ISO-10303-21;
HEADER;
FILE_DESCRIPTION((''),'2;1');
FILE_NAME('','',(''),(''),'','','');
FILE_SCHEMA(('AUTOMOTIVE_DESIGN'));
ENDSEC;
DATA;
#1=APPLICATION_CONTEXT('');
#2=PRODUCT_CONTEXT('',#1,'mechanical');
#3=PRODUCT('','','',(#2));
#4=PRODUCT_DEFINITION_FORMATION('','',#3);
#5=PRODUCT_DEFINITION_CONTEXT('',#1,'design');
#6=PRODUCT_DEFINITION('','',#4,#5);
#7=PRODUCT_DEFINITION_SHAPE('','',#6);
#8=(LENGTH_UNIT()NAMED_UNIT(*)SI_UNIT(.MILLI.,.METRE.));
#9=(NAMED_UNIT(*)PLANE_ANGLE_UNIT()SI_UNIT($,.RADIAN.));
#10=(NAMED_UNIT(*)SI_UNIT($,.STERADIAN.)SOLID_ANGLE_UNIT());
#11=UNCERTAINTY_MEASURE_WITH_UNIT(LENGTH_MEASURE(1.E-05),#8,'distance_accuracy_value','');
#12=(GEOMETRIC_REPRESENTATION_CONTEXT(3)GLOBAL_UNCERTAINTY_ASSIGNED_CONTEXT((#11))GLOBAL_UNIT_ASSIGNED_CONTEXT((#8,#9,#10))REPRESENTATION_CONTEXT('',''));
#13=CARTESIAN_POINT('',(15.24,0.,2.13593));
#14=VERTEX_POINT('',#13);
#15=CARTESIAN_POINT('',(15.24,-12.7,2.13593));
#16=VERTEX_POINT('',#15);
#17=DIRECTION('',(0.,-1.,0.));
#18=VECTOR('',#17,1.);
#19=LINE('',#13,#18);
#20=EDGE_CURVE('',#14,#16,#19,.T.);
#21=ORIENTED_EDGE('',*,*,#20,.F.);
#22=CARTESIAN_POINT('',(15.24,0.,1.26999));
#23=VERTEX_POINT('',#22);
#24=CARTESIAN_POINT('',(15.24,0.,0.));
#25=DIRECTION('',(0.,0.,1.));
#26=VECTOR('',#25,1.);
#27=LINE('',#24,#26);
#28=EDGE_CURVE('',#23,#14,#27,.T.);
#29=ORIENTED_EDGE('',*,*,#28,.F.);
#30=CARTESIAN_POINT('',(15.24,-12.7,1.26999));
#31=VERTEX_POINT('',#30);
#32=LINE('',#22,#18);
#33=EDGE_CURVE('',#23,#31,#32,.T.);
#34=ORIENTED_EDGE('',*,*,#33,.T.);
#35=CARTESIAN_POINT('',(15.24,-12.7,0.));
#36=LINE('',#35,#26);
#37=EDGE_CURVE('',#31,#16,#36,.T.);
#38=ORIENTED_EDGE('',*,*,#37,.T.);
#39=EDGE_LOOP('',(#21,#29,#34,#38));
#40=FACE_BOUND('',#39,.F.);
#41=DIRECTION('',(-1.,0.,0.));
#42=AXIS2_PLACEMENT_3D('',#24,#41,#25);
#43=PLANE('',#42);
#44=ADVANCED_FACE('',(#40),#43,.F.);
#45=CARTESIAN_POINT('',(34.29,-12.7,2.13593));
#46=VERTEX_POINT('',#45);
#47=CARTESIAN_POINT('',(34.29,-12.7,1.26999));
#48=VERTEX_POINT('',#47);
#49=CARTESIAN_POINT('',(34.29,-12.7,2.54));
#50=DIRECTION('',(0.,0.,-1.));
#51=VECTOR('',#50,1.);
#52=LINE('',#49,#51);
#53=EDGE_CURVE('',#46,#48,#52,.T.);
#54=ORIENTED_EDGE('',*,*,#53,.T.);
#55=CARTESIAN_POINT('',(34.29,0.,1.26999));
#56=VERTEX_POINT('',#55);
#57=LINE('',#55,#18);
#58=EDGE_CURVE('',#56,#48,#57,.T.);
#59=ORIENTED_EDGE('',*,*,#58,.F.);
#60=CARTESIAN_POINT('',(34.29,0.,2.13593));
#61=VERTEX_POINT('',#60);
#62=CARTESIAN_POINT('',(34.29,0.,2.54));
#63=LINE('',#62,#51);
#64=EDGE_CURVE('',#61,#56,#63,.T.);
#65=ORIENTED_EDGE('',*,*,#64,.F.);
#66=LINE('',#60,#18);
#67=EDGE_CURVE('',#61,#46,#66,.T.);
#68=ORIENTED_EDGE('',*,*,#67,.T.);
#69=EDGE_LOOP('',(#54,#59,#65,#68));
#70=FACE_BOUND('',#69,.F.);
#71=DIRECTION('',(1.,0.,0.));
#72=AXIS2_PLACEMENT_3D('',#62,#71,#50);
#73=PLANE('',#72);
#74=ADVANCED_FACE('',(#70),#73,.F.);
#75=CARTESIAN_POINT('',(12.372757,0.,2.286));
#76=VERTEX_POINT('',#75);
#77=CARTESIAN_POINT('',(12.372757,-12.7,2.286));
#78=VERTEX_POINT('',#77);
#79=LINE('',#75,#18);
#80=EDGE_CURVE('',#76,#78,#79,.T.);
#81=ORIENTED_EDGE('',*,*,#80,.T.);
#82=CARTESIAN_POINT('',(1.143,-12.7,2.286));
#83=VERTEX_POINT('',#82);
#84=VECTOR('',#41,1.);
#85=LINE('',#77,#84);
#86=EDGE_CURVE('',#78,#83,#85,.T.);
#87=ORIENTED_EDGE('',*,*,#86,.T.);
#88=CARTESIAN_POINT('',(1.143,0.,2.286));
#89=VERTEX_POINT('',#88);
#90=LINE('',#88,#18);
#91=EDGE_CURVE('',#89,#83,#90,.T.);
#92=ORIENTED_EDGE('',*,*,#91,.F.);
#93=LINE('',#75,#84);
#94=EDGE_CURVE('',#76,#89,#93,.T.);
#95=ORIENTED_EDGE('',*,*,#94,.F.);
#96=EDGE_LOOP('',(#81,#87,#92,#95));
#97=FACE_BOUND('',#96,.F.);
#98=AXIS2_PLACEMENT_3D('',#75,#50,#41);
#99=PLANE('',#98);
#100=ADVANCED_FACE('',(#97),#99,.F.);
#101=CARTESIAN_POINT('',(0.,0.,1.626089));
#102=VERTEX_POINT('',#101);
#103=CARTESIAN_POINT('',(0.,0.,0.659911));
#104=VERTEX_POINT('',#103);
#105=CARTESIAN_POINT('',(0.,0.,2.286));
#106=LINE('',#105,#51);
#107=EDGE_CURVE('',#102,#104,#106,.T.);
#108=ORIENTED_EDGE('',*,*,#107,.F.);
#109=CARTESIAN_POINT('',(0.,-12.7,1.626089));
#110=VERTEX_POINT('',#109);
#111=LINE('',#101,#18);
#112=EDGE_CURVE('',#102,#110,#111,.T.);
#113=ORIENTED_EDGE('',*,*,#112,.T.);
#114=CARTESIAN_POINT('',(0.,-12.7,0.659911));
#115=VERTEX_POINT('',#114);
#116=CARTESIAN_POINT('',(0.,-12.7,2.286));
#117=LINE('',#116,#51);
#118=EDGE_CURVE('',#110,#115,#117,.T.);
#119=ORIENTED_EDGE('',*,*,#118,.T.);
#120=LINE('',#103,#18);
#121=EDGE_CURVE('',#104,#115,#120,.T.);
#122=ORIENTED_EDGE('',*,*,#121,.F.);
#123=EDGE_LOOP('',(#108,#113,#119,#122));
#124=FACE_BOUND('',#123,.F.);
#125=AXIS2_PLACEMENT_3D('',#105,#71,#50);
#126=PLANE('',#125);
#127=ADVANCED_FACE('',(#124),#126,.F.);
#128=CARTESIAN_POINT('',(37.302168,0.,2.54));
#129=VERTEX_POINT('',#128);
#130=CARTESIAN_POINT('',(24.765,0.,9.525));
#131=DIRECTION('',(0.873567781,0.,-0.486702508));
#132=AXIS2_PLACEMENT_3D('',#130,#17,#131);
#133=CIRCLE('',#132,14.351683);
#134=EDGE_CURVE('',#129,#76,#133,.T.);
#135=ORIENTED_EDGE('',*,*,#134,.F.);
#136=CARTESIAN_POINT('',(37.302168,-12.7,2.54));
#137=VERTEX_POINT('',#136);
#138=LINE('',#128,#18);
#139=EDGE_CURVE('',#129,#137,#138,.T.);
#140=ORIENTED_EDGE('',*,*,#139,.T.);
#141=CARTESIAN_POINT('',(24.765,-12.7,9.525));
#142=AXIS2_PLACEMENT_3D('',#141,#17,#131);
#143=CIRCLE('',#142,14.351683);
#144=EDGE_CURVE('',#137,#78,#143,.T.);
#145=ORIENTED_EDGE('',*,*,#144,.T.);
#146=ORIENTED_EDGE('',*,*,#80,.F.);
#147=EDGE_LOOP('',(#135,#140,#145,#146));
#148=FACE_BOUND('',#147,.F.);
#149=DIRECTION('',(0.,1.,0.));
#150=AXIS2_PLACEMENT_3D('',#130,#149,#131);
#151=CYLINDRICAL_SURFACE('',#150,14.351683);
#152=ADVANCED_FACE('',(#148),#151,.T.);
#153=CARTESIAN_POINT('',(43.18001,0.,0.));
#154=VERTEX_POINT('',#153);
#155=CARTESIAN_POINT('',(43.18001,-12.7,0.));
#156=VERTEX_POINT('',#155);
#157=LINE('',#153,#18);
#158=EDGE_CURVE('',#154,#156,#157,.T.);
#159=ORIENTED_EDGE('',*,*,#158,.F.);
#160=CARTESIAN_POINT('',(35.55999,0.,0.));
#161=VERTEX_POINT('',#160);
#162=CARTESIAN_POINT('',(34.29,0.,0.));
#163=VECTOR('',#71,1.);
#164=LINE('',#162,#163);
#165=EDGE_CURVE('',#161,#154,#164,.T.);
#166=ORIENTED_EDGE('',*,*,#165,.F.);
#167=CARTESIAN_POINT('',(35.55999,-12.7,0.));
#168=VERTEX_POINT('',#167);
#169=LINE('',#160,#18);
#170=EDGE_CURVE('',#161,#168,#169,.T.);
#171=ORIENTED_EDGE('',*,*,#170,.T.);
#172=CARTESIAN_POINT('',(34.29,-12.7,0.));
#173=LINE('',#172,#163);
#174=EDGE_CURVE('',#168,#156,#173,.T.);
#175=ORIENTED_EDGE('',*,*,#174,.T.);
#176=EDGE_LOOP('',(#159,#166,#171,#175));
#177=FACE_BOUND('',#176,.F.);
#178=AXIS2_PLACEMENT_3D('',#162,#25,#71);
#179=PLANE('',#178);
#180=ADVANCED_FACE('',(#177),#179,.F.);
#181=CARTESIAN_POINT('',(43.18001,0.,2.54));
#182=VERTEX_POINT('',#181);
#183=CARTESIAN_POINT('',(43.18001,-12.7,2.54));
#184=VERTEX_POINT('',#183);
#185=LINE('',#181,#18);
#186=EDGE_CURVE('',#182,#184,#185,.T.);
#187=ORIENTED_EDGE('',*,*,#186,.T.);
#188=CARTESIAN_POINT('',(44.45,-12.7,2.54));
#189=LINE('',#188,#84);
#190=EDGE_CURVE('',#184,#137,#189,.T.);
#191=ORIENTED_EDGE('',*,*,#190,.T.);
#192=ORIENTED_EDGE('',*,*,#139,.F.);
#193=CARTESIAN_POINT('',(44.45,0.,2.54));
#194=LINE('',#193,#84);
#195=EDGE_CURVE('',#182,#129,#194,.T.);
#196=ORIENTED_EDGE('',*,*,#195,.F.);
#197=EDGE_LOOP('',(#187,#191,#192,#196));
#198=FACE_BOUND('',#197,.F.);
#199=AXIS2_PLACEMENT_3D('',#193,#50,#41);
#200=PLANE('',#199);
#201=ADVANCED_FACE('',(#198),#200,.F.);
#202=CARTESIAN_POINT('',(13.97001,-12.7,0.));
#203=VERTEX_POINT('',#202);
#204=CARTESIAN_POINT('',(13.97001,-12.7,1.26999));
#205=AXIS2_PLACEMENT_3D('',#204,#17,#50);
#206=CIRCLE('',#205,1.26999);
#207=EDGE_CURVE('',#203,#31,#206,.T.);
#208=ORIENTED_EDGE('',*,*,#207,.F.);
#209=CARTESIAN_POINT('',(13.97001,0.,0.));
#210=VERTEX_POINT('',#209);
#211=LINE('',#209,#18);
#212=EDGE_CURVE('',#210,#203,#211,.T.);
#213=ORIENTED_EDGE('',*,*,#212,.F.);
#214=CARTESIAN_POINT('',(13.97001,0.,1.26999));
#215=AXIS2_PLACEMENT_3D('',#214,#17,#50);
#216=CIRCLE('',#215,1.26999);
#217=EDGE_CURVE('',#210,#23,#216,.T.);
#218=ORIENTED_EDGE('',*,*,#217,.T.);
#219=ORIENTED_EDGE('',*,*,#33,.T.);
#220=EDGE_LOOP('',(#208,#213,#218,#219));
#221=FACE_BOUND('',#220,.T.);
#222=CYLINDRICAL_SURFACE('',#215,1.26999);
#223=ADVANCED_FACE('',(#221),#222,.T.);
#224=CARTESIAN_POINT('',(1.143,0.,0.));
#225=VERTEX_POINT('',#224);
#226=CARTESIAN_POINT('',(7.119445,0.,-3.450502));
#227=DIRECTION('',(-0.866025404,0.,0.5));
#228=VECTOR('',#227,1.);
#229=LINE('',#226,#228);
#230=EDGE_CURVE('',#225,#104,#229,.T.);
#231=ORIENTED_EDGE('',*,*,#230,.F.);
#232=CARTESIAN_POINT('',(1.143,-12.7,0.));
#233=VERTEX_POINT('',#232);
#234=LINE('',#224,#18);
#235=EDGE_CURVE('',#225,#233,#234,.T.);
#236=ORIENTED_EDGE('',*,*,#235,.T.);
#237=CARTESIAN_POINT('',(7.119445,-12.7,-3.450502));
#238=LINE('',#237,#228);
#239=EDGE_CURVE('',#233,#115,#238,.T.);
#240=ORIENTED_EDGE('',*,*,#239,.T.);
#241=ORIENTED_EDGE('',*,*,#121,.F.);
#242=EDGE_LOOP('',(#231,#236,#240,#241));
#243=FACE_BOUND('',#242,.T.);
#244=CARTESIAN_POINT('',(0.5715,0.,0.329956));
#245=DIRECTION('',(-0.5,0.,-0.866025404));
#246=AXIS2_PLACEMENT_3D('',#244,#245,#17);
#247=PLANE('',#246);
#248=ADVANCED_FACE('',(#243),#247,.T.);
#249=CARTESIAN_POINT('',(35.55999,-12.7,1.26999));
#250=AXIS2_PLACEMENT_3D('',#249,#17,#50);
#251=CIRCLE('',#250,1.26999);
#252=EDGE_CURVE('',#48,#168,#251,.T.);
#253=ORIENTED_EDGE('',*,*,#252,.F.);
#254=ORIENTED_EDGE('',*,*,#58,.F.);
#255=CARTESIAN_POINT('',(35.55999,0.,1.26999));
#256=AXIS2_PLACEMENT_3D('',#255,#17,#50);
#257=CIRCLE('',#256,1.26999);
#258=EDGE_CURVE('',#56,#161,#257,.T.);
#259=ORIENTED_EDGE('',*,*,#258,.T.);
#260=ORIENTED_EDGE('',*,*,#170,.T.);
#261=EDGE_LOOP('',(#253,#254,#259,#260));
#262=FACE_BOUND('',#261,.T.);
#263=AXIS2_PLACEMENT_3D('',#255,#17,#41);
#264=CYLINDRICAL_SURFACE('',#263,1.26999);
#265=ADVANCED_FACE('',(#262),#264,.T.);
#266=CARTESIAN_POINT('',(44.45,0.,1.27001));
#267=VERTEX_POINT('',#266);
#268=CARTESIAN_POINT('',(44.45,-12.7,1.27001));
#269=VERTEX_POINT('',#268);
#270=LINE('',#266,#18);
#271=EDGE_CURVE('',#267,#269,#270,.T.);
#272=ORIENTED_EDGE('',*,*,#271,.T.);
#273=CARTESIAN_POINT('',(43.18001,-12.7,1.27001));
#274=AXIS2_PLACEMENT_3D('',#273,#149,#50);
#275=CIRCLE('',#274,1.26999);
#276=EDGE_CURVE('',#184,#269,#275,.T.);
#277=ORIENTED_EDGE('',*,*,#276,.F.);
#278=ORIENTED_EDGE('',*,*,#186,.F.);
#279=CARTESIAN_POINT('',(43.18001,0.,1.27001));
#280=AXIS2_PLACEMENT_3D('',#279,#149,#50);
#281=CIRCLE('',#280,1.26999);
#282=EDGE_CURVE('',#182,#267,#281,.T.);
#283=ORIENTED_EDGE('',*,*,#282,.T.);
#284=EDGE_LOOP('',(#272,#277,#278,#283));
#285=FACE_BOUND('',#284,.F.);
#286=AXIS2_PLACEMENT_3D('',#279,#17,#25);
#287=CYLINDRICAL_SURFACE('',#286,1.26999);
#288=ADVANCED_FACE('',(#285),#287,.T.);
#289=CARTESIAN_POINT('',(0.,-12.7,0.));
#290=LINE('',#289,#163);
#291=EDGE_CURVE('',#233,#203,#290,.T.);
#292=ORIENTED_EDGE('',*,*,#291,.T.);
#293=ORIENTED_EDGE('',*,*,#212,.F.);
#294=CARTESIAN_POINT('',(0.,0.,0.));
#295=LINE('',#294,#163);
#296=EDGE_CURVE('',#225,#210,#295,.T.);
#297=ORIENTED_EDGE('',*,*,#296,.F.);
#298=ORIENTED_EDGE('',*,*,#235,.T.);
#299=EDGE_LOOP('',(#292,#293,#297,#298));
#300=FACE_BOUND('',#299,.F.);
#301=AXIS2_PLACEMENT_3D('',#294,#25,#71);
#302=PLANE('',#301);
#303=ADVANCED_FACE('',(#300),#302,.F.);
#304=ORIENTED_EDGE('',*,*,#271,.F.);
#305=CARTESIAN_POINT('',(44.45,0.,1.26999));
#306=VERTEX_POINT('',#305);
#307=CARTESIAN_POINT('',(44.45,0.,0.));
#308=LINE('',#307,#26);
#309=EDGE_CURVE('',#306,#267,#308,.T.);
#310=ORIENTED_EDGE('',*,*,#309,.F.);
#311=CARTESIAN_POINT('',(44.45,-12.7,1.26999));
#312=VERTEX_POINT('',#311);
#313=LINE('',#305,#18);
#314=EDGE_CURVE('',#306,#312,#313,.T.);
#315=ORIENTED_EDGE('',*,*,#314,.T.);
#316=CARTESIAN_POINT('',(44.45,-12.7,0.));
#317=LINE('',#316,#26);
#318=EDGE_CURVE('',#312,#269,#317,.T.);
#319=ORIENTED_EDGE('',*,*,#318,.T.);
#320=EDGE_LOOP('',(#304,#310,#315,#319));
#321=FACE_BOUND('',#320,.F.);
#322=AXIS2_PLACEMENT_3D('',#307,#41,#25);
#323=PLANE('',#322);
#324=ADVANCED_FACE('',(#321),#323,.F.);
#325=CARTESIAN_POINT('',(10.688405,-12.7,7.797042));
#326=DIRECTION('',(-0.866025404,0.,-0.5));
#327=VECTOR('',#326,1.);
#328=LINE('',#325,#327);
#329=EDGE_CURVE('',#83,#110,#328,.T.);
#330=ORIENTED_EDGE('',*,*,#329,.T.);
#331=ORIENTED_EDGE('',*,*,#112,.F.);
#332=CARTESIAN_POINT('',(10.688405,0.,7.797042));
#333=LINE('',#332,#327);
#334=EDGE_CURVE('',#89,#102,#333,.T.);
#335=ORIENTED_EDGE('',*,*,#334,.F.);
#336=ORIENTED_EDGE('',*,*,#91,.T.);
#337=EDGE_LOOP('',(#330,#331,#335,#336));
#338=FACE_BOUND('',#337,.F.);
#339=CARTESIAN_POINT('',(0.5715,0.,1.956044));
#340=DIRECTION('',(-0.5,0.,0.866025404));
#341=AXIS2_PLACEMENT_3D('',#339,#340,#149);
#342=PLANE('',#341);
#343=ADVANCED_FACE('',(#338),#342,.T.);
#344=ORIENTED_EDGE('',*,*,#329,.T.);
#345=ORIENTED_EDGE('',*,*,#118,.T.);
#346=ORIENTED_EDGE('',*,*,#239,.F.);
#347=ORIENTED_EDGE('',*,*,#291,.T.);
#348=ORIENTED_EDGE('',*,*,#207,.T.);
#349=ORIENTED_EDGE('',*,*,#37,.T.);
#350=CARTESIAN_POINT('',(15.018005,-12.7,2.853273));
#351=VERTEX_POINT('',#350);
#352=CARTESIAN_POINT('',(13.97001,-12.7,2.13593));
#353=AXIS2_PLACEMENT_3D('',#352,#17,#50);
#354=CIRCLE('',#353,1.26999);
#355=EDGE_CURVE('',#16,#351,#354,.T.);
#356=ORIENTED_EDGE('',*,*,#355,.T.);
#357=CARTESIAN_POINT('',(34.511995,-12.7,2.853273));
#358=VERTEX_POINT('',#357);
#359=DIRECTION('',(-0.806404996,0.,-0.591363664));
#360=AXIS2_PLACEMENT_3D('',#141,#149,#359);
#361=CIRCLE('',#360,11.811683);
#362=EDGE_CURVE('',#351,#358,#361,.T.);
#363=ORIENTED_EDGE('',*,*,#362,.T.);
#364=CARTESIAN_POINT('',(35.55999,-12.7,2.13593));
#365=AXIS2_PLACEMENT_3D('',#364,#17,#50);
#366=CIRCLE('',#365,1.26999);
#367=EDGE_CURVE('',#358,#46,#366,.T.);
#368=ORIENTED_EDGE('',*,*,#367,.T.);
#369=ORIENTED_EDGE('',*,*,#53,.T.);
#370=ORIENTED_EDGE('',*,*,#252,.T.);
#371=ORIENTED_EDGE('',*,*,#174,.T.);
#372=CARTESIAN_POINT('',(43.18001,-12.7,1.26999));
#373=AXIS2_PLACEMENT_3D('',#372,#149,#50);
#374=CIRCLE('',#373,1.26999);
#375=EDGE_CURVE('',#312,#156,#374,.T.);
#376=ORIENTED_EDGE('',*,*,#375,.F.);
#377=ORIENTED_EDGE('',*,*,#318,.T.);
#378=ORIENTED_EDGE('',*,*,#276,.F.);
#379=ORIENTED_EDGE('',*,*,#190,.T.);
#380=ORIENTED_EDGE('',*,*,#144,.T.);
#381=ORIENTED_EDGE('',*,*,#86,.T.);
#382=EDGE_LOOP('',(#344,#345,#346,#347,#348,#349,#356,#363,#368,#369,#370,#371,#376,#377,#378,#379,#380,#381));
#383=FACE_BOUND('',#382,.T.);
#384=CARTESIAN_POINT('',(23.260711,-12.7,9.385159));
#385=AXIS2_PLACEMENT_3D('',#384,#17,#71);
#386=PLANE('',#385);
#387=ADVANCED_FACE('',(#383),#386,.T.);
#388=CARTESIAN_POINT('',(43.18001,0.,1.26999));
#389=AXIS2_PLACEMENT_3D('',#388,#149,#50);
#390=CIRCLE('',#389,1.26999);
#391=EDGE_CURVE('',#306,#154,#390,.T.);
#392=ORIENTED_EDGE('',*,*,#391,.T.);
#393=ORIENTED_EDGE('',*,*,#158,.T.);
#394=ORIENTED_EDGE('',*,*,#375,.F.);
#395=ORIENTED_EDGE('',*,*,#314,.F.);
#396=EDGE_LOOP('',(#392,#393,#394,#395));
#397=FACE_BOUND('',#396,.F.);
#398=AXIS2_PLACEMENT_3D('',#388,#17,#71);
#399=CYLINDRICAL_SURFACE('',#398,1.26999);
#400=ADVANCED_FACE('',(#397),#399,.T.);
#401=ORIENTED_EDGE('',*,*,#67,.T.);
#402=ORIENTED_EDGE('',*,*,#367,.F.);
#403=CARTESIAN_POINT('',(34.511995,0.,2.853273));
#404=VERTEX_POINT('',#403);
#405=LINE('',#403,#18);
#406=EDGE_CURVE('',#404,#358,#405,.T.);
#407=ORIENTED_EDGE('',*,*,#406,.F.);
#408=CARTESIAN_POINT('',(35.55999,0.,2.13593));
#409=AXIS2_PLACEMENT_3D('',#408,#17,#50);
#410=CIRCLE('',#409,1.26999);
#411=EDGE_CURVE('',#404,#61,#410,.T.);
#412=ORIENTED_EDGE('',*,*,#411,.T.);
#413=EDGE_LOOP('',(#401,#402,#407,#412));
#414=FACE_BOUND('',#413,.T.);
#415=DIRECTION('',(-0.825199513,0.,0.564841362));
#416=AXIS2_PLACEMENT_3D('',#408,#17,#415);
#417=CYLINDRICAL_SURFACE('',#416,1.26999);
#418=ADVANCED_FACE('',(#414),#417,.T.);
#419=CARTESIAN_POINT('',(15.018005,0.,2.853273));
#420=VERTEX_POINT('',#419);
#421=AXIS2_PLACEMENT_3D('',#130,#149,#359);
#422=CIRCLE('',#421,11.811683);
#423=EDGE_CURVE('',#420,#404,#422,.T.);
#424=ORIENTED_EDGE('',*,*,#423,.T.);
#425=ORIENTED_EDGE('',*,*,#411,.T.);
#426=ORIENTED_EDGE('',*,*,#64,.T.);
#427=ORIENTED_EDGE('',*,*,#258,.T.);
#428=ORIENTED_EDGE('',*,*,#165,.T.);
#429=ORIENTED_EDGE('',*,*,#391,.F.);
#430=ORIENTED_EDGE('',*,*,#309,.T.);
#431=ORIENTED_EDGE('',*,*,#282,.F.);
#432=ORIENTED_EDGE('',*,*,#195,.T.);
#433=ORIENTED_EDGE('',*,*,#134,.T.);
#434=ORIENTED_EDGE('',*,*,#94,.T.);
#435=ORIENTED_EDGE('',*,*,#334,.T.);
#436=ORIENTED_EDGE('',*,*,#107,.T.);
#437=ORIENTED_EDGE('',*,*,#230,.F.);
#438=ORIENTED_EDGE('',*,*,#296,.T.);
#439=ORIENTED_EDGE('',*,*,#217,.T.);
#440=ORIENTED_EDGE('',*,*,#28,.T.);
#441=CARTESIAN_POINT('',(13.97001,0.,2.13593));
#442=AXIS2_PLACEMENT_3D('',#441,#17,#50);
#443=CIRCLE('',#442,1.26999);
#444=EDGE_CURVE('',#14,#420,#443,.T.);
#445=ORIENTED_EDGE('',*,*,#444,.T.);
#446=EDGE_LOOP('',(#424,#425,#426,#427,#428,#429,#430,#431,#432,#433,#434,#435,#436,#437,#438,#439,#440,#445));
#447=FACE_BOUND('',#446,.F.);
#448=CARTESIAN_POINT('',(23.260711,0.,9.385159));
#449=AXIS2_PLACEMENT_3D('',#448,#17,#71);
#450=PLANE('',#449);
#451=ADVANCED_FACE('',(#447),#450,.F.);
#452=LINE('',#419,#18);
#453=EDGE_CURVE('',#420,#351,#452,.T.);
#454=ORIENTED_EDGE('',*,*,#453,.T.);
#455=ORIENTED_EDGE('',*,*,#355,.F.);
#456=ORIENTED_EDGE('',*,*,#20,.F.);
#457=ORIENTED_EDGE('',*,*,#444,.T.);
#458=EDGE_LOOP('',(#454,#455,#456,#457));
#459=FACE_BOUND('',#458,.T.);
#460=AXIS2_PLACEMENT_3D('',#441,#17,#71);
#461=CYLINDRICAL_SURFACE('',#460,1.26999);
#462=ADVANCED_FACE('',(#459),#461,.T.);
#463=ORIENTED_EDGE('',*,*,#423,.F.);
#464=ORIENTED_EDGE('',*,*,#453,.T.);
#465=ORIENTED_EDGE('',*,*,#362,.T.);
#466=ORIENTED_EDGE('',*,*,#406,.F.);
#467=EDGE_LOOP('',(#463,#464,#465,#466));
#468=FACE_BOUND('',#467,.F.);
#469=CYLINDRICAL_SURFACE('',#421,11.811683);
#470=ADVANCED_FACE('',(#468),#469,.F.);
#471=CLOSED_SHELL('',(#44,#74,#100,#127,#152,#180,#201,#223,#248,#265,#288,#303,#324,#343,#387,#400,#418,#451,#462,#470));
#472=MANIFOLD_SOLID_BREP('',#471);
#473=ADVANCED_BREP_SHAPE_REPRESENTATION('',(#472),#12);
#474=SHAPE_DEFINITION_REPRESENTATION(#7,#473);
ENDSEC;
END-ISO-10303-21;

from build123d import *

# Parameters (mm, degrees)
F1_DEPTH   = 12.7
F2_SIZE2   = 0.6599113577
F2_SIZE    = 1.143
F2_2_SIZE2 = 0.6599113577
F2_2_SIZE  = 1.143
F3_R       = 1.26999


# Not quite as in the source:
# - a fillet or chamfer is up to 0.001 mm smaller than in the source, because OpenCascade refuses the exact size


with BuildPart() as f1:
    # F0 (on Front) → F1 (new body)
    with BuildSketch(Plane.XZ):
        with BuildLine():
            Line((0, 2.286), (0, 0))
            Line((0, 0), (15.24, 0))
            Line((15.24, 0), (15.24, 2.54))
            ThreePointArc((15.24, 2.54), (24.765, 21.336682776), (34.29, 2.54))
            Line((34.29, 2.54), (34.29, 0))
            Line((34.29, 0), (44.45, 0))
            Line((44.45, 0), (44.45, 2.54))
            Line((44.45, 2.54), (37.3021676826, 2.54))
            ThreePointArc((37.3021676826, 2.54), (24.6187816105, 23.8759379026), (12.3727573659, 2.286))
            Line((12.3727573659, 2.286), (0, 2.286))
        make_face()
    extrude(amount=F1_DEPTH)

    # F2
    f2_edges = [f1.edges().sort_by_distance(p)[0] for p in [
        (0, -6.35, 0),
    ]]
    f2_side = f1.faces().sort_by_distance((7.62, -6.35, 0))[0]
    chamfer(f2_edges, length=F2_SIZE, length2=F2_SIZE2, reference=f2_side)

    # F2#2
    f2_2_edges = [f1.edges().sort_by_distance(p)[0] for p in [
        (0, -6.35, 2.286),
    ]]
    f2_2_side = f1.faces().sort_by_distance((6.186379, -6.35, 2.286))[0]
    chamfer(f2_2_edges, length=F2_2_SIZE, length2=F2_2_SIZE2, reference=f2_2_side)

    # F3 (radius 1.27 in the source; OpenCascade refuses exactly that, so slightly less here)
    f3_edges = [f1.edges().sort_by_distance(p)[0] for p in [
        (44.45, -6.35, 2.54),
        (44.45, -6.35, 0),
        (34.29, -6.35, 0),
        (34.29, -6.35, 2.54),
        (15.24, -6.35, 2.54),
        (15.24, -6.35, 0),
    ]]
    fillet(f3_edges, radius=F3_R)


solid = f1.part
